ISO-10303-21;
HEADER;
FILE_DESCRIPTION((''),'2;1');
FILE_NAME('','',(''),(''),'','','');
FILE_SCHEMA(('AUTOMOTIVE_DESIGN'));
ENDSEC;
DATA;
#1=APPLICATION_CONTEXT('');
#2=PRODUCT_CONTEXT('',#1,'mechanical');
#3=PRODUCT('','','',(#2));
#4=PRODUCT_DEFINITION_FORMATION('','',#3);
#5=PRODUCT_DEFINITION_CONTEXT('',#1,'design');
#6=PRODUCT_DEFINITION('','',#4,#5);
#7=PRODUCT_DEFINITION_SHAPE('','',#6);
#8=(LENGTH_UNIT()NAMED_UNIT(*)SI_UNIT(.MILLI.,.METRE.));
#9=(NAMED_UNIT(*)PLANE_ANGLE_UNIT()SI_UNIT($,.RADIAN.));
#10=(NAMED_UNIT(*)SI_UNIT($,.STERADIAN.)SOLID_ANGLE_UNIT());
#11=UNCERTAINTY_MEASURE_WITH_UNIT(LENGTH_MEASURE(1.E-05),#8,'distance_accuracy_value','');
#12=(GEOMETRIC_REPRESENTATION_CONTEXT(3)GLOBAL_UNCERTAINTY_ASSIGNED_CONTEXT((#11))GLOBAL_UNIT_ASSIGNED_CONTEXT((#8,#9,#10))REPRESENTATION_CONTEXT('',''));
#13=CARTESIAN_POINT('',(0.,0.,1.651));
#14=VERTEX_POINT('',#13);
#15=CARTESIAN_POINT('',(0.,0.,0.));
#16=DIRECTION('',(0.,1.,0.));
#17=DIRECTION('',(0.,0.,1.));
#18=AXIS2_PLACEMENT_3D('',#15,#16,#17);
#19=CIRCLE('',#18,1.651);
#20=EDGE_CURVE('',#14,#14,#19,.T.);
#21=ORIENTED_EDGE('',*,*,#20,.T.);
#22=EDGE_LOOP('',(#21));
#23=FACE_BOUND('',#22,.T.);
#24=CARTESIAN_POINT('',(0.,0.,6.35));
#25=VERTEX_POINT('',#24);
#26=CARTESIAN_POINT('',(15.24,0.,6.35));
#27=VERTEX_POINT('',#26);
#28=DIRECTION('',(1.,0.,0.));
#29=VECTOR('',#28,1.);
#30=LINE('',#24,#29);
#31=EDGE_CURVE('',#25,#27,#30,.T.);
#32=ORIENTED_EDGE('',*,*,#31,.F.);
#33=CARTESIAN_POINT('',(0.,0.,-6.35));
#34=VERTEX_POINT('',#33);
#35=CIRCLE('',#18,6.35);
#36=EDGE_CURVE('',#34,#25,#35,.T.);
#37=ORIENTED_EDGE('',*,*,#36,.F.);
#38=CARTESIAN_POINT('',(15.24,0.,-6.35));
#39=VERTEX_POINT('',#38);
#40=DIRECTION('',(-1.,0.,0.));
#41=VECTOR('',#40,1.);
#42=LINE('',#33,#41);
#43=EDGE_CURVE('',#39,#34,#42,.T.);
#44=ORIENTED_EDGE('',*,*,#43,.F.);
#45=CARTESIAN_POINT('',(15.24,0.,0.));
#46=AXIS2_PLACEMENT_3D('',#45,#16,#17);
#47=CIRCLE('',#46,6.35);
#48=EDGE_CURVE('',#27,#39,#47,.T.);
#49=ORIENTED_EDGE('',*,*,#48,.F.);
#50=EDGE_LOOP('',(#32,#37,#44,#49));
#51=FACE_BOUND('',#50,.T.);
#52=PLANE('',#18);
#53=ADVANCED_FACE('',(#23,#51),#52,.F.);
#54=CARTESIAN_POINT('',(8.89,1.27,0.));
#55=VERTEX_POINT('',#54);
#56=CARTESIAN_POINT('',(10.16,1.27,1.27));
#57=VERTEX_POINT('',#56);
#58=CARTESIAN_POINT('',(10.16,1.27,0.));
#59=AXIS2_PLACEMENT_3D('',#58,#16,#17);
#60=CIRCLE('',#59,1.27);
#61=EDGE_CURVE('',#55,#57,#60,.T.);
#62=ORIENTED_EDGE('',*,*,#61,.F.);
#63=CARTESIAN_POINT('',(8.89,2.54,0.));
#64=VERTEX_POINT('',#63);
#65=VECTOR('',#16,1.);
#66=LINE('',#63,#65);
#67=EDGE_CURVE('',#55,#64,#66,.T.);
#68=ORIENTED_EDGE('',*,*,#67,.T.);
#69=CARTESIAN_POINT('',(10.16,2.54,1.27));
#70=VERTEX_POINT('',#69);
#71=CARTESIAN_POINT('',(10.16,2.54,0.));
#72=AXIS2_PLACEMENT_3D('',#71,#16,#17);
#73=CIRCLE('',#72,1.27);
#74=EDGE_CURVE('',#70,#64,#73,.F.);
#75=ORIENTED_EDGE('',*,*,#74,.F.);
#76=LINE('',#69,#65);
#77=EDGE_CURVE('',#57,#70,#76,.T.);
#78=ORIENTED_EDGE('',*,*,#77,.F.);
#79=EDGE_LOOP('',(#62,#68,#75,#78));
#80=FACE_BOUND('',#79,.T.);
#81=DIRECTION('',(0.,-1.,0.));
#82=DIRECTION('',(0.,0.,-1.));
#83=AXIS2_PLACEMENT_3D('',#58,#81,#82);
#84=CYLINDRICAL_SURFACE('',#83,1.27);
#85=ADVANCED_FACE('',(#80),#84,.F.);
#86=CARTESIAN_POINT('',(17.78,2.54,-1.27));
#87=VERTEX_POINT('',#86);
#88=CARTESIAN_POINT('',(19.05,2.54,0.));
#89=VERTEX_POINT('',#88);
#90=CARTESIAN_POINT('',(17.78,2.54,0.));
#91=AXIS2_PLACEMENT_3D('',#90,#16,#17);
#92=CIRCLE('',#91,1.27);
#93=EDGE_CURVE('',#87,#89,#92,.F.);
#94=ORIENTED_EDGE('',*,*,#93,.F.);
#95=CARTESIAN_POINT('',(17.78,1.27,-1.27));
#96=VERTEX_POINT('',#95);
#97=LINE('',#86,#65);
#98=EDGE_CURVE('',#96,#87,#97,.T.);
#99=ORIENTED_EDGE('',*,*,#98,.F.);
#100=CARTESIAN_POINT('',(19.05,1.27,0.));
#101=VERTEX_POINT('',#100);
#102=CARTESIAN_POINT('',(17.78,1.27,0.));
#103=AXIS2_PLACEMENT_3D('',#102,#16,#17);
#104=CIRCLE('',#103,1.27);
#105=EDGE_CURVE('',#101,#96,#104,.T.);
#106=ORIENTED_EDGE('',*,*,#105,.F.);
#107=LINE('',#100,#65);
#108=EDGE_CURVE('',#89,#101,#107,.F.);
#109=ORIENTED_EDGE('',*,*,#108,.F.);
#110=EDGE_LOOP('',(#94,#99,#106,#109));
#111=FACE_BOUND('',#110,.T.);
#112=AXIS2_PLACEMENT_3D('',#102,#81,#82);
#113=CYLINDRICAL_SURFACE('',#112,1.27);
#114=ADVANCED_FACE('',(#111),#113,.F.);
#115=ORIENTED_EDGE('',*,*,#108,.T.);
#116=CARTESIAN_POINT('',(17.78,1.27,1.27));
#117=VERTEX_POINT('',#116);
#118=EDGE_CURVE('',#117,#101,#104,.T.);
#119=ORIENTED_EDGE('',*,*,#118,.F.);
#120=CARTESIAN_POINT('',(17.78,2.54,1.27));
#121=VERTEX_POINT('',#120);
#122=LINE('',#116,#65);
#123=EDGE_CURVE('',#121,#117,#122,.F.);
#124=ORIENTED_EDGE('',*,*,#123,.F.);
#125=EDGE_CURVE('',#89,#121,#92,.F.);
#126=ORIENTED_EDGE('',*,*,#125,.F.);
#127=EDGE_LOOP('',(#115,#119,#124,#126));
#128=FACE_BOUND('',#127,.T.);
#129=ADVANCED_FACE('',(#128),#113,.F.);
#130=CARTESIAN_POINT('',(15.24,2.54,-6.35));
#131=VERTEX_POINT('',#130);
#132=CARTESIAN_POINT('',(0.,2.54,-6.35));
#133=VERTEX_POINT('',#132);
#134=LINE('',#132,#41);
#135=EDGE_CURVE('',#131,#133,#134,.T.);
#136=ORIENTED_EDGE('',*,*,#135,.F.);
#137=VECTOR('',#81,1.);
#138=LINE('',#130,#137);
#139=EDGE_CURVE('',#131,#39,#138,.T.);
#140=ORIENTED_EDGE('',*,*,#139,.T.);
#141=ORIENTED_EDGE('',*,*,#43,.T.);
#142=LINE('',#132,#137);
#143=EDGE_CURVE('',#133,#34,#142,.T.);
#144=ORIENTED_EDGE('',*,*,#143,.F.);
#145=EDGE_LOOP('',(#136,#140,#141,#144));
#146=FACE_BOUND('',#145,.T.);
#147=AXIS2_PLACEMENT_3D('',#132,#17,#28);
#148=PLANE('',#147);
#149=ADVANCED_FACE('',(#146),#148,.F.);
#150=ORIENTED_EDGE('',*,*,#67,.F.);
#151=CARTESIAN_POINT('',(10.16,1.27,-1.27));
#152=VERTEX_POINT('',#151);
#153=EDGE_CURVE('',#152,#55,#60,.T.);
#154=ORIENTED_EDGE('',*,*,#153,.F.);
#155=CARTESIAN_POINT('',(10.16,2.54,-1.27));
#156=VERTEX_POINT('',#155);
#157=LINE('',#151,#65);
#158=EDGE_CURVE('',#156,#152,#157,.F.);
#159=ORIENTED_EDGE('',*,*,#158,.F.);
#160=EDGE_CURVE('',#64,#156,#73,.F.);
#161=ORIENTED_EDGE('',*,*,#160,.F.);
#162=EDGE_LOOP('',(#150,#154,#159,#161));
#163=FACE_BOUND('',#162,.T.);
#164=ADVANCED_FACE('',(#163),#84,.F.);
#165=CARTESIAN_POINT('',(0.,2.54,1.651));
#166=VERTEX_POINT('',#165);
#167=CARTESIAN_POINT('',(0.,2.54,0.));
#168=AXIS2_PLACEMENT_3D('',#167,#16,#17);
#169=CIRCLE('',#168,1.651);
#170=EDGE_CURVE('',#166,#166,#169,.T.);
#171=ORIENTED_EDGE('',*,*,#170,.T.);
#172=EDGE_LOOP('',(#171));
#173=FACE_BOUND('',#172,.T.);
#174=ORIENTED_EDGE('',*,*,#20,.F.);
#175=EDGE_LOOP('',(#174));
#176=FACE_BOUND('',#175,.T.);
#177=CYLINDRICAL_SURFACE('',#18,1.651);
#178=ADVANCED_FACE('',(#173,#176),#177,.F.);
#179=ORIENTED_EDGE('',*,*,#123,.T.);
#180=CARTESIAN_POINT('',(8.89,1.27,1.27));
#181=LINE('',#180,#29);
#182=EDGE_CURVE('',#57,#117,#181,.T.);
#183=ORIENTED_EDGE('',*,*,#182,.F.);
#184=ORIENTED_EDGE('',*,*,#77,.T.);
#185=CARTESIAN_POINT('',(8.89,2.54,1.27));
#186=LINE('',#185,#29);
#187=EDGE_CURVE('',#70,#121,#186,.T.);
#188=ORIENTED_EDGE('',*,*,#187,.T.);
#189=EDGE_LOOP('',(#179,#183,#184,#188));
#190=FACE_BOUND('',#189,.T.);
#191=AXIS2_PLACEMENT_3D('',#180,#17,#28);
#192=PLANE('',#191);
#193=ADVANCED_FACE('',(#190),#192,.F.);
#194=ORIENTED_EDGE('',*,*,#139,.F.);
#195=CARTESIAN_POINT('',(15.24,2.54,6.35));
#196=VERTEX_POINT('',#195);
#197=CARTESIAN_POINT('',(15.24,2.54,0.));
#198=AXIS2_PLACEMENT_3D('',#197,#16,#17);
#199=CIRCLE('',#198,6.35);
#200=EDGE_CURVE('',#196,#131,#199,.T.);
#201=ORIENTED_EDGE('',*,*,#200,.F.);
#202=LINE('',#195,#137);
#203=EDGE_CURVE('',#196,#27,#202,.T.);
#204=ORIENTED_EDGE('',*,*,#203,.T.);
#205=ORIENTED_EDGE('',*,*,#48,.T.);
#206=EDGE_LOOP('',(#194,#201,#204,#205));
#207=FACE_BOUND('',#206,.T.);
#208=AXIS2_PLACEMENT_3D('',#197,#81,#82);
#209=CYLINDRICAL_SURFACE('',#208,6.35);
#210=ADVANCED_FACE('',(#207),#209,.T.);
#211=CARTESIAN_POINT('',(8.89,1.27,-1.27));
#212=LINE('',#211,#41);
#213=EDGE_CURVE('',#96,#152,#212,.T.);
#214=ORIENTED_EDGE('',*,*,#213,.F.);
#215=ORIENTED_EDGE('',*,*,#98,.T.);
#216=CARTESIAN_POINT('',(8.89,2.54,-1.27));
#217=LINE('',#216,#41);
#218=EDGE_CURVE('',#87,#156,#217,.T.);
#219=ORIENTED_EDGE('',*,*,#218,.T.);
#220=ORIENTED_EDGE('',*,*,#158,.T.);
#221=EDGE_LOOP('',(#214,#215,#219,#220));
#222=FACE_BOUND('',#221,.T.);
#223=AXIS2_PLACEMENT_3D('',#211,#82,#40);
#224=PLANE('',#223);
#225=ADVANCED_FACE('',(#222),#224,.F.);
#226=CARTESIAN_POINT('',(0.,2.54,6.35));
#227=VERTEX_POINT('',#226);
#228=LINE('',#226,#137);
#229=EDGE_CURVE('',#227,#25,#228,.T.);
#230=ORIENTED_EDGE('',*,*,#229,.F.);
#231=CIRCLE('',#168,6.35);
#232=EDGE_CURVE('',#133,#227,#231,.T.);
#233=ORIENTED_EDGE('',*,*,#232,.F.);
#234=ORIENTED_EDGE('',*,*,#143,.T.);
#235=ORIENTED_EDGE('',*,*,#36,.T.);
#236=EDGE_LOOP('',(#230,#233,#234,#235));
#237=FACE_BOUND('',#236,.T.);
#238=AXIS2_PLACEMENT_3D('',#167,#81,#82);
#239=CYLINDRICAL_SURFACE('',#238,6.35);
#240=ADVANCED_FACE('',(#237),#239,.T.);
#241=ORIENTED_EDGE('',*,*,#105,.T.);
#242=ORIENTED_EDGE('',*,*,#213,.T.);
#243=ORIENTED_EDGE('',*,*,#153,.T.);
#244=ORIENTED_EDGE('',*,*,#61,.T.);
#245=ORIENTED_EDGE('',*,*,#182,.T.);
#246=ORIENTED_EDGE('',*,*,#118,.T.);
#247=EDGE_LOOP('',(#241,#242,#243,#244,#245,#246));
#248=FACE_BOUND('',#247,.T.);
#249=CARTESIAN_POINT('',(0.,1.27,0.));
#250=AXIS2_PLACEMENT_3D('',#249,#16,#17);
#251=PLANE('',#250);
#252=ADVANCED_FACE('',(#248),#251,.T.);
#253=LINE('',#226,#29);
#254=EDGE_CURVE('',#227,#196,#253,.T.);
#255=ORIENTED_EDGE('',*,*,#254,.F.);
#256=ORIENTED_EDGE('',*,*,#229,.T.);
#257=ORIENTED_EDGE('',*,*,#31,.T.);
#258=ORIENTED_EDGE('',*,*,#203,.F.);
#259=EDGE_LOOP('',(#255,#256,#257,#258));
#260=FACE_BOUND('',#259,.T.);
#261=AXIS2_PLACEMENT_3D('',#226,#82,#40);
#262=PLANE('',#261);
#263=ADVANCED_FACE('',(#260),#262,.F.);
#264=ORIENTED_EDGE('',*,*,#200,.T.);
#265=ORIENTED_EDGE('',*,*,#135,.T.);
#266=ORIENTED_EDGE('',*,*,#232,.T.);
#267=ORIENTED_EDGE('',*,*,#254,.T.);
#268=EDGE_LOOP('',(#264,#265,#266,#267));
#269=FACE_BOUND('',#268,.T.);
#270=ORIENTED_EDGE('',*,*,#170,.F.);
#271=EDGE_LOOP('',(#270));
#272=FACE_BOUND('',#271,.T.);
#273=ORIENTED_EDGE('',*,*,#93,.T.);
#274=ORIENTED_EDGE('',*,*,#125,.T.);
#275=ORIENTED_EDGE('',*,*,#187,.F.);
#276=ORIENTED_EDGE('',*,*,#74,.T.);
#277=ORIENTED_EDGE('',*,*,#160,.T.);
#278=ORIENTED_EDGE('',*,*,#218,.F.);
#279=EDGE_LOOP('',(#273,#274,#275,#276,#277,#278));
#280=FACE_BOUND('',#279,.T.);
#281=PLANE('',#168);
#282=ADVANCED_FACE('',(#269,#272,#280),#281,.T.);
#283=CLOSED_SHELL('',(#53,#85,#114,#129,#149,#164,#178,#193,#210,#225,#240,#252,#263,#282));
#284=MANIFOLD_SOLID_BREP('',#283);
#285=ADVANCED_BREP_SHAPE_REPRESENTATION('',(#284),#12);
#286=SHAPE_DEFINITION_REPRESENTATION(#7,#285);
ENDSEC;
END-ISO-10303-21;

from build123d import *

# Parameters (mm, degrees)
BOSS_EXTRUDE1_DEPTH = 2.54
SKETCH2_R           = 1.651
CUT_EXTRUDE1_DEPTH  = 2.54
SKETCH3_W           = 10.16
SKETCH3_H           = 2.54
CUT_EXTRUDE2_DEPTH  = 1.27
FILLET1_R           = 1.27


with BuildPart() as part:
    # Sketch1 → Boss-Extrude1 (new body)
    with BuildSketch(Plane(origin=(0, 0, 0), x_dir=(1, 0, 0), z_dir=(0, 1, 0))):
        with BuildLine():
            Line((0, 6.35), (15.24, 6.35))
            ThreePointArc((15.24, 6.35), (21.59, 0), (15.24, -6.35))
            Line((15.24, -6.35), (0, -6.35))
            ThreePointArc((0, -6.35), (-6.35, 0), (0, 6.35))
        make_face()
    extrude(amount=BOSS_EXTRUDE1_DEPTH)

    # Sketch2 → Cut-Extrude1 (cut)
    with BuildSketch(Plane(origin=(0, 2.54, 0), x_dir=(1, 0, 0), z_dir=(0, 1, 0))):
        with Locations(Location((0, 0, 0), (0, 0, 270))):
            Circle(SKETCH2_R)
    extrude(amount=-CUT_EXTRUDE1_DEPTH, mode=Mode.SUBTRACT)

    # Sketch3 → Cut-Extrude2 (cut)
    with BuildSketch(Plane(origin=(0, 2.54, 0), x_dir=(1, 0, 0), z_dir=(0, 1, 0))):
        with Locations((13.97, 0)):
            Rectangle(SKETCH3_W, SKETCH3_H)
    extrude(amount=-CUT_EXTRUDE2_DEPTH, mode=Mode.SUBTRACT)

    # Fillet1
    fillet1_edges = [part.edges().sort_by_distance(p)[0] for p in [
        (19.05, 1.905, 1.27),
        (19.05, 1.905, -1.27),
        (8.89, 1.905, 1.27),
        (8.89, 1.905, -1.27),
    ]]
    fillet(fillet1_edges, radius=FILLET1_R - 0.0001)  # a hair under: the kernel refuses the full size


solid = part.part
